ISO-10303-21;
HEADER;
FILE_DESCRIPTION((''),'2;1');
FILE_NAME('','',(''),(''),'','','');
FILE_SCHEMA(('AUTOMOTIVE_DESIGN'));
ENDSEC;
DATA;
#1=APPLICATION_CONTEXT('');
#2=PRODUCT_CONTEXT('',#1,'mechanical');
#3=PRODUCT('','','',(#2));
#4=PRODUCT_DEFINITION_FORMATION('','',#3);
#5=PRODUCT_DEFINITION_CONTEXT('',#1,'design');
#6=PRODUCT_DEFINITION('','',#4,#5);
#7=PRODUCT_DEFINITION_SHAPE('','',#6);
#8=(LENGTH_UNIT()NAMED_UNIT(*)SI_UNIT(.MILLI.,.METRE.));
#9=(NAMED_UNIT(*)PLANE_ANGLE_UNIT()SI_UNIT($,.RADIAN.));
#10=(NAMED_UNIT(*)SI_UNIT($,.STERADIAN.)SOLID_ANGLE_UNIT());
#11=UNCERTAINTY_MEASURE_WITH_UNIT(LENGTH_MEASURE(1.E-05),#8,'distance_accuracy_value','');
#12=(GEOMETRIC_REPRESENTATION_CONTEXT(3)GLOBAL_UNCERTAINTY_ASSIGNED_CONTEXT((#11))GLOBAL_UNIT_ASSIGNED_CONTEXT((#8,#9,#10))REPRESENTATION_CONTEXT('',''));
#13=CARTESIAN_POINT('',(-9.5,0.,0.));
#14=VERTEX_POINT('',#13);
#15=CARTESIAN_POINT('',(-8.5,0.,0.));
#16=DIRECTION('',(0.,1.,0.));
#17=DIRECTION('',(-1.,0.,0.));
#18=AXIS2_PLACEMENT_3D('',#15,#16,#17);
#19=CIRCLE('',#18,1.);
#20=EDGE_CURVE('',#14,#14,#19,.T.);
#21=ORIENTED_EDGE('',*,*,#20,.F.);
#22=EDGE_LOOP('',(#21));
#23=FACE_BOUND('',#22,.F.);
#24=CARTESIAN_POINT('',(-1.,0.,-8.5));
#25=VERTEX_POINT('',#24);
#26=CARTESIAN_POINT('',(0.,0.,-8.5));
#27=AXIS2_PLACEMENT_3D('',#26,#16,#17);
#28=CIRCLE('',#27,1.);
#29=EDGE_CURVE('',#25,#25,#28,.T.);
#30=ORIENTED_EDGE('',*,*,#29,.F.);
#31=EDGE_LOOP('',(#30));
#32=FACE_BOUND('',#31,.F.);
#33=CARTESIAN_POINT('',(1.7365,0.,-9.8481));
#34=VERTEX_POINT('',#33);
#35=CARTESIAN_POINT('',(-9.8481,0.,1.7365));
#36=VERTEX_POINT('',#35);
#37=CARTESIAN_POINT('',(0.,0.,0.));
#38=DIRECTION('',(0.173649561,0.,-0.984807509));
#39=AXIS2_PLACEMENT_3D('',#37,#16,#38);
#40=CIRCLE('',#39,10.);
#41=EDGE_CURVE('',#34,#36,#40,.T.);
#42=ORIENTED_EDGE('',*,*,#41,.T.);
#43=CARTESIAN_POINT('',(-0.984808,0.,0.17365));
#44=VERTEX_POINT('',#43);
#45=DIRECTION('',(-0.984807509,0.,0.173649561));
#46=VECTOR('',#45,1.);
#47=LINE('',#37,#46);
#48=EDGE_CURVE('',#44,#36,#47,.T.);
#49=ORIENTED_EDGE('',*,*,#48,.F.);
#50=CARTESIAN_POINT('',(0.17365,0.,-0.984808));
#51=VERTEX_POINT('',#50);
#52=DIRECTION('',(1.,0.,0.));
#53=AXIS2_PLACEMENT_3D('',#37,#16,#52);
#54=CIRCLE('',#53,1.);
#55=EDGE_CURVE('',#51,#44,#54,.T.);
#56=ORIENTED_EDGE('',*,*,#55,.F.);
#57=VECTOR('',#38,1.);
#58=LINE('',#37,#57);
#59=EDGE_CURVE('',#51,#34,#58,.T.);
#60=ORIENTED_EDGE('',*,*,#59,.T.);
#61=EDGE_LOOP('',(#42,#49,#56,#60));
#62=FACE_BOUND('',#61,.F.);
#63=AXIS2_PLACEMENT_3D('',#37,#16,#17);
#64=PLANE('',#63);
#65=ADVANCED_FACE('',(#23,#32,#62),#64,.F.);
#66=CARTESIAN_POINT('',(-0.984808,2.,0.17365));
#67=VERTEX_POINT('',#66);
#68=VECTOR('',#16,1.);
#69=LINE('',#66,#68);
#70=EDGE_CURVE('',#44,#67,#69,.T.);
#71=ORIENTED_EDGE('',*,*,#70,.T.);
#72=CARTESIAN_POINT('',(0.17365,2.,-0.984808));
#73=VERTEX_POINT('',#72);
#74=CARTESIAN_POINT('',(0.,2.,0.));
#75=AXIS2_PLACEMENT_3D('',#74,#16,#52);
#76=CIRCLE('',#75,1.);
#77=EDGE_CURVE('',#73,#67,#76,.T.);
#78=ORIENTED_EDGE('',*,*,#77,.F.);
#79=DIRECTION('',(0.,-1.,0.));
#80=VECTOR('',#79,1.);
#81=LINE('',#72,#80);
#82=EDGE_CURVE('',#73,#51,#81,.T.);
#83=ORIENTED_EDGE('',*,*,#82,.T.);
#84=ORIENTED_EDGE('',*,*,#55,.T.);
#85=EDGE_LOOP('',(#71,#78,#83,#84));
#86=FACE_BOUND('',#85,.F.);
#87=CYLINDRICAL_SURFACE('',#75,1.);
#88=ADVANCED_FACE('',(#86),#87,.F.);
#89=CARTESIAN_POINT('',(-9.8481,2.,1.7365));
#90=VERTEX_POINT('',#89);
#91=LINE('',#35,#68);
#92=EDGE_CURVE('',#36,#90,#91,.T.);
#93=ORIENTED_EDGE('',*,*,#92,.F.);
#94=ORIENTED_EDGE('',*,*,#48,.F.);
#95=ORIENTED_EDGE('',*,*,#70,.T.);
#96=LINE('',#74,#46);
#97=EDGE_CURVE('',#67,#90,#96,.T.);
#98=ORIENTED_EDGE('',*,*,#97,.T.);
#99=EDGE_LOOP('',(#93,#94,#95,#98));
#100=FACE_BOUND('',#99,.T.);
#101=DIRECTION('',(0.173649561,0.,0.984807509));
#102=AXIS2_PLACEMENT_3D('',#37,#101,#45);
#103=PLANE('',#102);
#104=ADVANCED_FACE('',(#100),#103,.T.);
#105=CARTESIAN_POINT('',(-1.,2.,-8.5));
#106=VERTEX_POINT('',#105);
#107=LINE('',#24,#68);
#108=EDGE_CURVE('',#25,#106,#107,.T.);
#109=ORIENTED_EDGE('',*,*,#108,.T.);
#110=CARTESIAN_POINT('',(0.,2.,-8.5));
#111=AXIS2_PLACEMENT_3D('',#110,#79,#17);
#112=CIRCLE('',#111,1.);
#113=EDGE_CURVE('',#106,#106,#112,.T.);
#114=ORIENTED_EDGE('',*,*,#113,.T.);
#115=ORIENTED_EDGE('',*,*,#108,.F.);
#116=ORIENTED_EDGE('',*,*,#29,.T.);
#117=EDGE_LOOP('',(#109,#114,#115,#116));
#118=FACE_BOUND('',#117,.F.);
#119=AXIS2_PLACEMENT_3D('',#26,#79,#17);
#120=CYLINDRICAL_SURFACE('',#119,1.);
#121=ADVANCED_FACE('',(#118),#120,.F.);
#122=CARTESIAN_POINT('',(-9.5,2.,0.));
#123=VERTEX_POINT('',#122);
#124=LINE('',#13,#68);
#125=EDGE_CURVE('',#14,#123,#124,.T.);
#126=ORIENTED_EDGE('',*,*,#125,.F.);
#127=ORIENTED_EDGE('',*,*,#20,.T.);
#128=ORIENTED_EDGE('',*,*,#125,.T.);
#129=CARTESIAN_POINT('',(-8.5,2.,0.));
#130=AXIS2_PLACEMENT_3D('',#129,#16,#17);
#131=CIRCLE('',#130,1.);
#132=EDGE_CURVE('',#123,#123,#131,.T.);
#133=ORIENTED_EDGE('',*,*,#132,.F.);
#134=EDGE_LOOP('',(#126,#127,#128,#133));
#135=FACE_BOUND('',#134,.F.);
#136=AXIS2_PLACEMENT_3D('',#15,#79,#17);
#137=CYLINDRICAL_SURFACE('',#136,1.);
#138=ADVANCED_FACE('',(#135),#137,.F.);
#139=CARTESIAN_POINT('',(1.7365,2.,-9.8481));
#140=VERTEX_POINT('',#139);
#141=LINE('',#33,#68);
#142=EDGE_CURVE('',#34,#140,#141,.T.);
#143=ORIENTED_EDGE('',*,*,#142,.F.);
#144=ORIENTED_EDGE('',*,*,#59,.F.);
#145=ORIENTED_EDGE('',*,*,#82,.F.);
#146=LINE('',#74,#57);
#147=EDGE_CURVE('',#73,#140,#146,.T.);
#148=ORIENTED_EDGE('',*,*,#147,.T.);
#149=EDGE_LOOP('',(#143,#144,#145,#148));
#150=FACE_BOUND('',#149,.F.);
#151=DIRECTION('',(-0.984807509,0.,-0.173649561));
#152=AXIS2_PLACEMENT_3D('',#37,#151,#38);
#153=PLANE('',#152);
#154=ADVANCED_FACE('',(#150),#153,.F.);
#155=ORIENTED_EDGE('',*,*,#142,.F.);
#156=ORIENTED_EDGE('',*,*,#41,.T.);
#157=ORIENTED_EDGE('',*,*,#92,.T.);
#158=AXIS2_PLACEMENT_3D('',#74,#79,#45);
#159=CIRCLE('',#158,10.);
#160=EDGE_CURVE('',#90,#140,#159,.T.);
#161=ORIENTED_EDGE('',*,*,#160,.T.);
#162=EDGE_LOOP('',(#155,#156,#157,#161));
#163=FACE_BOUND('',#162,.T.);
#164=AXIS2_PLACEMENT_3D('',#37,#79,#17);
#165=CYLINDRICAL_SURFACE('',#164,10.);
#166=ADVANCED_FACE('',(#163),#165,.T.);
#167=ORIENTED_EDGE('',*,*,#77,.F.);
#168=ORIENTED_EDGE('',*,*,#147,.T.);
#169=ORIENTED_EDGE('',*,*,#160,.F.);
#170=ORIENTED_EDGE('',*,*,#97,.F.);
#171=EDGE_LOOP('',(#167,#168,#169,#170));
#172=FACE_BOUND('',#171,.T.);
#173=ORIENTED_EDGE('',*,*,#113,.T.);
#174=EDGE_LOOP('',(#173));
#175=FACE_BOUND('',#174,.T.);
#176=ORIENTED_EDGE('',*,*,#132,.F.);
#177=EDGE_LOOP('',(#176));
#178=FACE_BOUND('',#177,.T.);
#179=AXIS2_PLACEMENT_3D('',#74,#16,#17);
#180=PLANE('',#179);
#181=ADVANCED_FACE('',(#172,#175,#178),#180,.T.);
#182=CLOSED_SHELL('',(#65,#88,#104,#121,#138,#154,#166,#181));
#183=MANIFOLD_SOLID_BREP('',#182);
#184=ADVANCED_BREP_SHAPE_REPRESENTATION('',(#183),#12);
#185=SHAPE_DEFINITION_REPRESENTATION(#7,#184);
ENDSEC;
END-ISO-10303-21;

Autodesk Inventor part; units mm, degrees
ref_plane "YZ Plane" through (0, 0, 0) normal (1, 0, 0) x (0, 1, 0)
ref_plane "XZ Plane" through (0, 0, 0) normal (0, 1, 0) x (-1, 0, 0)
ref_plane "XY Plane" through (0, 0, 0) normal (0, 0, 1) x (1, 0, 0)
sketch "Sketch1" plane through (0, 0, 0) normal (0, 1, 0) x (-1, 0, 0)
  circle A0 centre (0, 0) radius 10
  line L0 (0, 0) -> (9.8481, 1.7365)
  line L1 (0, 0) -> (10, 0) construction
  line L2 (0, 0) -> (-1.7365, -9.8481)
  line L3 (0, 0) -> (10, 0) construction
  line L4 (10, 0) -> (8.5, 0)
  circle A1 centre (8.5, 0) radius 1
  line L5 (0, -10) -> (0, -8.5)
  circle A2 centre (0, -8.5) radius 1
  dimension "d0" = 20
  dimension "d1" = 10
  dimension "d2" = 100
  dimension "d3" = 1.5
  dimension "d4" = 2
  dimension "d5" = 1.5
  dimension "d6" = 2
extrude "Extrusion1" add sketch "Sketch1" along normal blind 2 contours A0 L2 L0 picked at (2.2606, -5.1604)
sketch "Sketch2" plane through (0, 2, 0) normal (0, 1, 0) x (1, 0, 0)
  line L0 (0, 0) -> (1.7365, 9.8481) projected
  circle A0 centre (0, 0) radius 1
  dimension "d9" = 2
extrude "Extrusion2" cut sketch "Sketch2" against normal blind 4
properties part number "bell_crank_small_v1"
